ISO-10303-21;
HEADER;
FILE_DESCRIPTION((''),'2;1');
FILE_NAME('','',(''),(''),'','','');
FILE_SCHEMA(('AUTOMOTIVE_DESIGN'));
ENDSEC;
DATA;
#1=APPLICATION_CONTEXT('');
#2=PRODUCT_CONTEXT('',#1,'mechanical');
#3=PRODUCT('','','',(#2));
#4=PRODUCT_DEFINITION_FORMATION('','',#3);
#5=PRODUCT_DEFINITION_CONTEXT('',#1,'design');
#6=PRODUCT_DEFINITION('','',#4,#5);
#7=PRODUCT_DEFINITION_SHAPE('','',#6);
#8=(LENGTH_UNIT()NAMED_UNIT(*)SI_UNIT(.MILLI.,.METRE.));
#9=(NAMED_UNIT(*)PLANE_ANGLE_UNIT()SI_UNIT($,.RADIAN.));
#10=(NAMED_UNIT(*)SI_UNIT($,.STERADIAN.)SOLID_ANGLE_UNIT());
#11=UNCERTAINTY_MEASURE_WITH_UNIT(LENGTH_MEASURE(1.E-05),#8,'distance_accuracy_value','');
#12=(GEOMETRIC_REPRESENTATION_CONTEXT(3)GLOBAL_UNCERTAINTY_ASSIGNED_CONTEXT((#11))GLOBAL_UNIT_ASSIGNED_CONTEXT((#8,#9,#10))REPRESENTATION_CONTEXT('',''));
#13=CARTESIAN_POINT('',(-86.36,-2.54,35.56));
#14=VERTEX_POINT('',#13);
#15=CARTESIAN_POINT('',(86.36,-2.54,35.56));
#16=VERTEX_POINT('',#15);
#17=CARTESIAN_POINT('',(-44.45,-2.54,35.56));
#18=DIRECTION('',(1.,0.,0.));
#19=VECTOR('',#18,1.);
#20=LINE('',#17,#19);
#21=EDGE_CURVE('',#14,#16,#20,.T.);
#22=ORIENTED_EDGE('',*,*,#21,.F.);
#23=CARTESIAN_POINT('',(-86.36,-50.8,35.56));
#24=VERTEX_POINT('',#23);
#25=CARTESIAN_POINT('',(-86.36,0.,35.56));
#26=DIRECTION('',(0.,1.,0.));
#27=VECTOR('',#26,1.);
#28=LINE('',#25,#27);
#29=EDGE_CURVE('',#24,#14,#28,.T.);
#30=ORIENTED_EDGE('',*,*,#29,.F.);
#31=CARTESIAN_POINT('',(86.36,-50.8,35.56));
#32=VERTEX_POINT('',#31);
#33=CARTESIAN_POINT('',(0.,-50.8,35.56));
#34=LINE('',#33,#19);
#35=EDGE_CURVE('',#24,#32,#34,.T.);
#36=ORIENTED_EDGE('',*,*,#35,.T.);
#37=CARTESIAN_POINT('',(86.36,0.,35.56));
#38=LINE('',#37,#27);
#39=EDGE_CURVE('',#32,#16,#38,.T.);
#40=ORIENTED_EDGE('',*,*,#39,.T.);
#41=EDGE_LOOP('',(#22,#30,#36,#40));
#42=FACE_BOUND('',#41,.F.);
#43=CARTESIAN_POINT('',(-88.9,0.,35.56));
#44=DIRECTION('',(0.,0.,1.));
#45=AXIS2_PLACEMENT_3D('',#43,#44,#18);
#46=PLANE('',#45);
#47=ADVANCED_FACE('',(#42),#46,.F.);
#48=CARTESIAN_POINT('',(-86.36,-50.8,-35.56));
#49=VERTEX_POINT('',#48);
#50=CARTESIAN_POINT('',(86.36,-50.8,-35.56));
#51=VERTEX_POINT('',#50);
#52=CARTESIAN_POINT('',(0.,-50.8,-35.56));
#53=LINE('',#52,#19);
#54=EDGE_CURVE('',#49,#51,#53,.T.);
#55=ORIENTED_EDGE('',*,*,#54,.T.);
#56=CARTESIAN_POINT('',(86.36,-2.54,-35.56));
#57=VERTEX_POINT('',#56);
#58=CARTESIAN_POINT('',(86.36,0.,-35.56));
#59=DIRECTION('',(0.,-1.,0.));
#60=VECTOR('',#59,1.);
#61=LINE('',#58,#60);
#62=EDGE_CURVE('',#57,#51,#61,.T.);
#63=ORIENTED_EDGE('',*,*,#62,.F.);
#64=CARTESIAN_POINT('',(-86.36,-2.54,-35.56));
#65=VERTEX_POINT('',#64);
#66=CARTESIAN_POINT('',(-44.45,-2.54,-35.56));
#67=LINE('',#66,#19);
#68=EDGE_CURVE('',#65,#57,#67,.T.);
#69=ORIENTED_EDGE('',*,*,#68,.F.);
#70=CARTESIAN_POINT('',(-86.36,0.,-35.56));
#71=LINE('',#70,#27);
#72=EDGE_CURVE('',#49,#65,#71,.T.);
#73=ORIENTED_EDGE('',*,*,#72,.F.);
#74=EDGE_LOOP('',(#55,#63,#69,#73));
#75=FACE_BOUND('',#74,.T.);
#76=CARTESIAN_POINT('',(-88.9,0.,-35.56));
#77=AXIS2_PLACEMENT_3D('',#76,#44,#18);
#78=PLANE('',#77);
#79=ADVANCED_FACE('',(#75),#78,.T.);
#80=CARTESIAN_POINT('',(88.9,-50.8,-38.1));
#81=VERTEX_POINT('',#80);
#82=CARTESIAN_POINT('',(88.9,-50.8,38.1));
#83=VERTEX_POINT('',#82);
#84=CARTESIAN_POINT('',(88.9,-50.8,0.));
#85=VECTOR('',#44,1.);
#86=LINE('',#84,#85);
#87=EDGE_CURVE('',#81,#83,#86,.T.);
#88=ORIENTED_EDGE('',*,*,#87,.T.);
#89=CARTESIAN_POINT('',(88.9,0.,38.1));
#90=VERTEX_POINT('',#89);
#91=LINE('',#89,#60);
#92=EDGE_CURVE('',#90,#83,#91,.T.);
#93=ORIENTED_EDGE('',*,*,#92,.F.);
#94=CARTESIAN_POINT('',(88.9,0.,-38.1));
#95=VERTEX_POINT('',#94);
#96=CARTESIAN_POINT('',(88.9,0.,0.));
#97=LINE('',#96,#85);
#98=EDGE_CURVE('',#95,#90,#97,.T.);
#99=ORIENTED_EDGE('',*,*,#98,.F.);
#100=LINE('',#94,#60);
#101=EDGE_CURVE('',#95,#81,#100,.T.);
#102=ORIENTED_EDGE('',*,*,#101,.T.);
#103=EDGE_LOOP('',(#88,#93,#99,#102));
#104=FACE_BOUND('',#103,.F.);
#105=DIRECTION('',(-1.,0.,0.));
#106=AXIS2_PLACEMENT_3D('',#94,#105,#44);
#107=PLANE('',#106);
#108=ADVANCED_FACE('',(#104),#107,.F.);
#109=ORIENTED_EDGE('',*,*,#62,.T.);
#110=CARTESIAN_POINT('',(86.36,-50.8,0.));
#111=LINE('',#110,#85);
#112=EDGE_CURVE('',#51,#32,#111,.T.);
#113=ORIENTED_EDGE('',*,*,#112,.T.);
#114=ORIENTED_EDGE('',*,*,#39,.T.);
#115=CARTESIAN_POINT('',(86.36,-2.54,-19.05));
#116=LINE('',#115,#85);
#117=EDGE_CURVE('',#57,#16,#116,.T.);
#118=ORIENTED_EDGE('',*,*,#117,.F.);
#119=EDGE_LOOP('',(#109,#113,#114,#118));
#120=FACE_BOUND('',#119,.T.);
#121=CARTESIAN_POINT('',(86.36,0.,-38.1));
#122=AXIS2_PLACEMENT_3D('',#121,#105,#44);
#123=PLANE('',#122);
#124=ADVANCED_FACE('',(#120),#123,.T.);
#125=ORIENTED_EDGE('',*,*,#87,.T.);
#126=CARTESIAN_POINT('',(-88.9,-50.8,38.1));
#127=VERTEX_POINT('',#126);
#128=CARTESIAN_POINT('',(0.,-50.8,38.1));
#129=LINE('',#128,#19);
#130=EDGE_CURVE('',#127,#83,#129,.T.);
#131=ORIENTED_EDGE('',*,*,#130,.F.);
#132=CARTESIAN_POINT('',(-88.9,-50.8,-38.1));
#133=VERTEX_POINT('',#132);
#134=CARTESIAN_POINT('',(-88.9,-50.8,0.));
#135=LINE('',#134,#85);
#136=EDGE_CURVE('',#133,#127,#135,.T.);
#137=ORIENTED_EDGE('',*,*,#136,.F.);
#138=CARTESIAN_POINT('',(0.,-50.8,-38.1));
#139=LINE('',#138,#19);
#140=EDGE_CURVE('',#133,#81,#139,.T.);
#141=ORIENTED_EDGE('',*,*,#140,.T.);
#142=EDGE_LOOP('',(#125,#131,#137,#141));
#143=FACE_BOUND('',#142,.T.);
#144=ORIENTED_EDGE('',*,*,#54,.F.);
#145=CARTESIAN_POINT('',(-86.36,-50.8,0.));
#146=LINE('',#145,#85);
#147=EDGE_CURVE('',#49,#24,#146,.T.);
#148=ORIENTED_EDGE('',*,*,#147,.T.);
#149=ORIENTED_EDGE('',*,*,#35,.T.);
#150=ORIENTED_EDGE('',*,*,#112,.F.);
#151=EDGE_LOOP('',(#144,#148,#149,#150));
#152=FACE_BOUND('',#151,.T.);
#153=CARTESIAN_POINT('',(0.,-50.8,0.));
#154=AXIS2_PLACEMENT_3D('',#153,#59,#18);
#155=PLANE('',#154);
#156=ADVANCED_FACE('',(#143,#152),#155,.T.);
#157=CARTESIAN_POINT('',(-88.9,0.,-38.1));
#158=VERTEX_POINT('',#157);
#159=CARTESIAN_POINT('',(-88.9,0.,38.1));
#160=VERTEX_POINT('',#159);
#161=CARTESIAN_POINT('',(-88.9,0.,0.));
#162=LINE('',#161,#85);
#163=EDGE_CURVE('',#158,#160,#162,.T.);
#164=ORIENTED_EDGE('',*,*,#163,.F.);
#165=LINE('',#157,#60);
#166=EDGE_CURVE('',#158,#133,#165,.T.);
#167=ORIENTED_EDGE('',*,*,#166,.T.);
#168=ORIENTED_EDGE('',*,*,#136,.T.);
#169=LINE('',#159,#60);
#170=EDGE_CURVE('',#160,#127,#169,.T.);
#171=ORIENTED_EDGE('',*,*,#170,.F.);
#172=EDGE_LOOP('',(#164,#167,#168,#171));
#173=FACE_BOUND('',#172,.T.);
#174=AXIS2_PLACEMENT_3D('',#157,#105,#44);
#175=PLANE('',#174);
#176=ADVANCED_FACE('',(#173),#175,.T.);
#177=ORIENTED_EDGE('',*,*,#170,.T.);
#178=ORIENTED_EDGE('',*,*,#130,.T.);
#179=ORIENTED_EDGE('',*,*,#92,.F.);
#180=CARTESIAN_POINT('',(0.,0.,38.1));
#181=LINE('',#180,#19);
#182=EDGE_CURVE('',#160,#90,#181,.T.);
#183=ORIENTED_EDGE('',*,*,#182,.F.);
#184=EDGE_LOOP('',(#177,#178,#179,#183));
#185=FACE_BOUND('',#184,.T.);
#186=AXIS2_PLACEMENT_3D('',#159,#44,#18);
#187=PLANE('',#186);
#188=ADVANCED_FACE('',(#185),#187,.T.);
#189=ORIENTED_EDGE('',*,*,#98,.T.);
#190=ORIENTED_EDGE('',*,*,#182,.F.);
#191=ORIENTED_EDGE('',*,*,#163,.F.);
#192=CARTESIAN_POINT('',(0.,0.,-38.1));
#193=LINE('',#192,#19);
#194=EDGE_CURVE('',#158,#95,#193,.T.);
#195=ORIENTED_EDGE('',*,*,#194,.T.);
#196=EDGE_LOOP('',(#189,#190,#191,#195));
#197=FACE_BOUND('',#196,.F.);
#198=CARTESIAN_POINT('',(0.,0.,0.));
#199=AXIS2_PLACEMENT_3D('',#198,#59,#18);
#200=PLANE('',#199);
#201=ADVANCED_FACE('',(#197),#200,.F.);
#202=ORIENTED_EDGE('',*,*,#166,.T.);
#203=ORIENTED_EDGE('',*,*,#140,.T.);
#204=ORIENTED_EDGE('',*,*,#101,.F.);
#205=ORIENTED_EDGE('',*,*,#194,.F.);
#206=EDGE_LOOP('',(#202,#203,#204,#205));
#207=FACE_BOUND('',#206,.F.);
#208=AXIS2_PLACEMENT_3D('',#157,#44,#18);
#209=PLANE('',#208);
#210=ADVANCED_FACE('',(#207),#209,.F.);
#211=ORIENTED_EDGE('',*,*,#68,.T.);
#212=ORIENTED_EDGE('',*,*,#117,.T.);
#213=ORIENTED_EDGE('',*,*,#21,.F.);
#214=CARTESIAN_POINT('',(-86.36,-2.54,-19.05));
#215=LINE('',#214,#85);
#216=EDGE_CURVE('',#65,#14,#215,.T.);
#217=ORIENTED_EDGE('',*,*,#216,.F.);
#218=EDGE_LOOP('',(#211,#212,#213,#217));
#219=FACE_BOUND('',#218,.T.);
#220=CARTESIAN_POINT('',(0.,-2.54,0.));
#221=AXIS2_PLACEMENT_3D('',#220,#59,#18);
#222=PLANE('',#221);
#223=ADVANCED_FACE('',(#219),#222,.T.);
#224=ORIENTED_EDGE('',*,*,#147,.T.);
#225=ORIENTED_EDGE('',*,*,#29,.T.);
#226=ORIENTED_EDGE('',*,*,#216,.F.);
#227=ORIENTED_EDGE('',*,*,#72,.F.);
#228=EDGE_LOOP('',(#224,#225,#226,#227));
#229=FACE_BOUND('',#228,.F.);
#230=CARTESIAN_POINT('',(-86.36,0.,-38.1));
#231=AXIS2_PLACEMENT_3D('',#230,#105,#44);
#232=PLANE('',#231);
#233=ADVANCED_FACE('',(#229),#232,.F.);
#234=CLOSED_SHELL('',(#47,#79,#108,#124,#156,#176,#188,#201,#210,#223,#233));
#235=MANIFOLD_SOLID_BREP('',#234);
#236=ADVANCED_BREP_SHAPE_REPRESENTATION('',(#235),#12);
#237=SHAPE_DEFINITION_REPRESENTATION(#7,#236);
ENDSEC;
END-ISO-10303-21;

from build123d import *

# Parameters (mm, degrees)
F0_W     = 177.8
F0_H     = 76.2
F1_DEPTH = 50.8
F3_T     = -2.54


# Not quite as in the source:
# - the program builds the solid bodies; features that only make, move or delete a surface that nothing else refers to are left out


with BuildPart() as f1:
    # F0 (on Front) → F1 (new body)
    with BuildSketch(Plane.XZ):
        Rectangle(F0_W, F0_H)
    extrude(amount=F1_DEPTH)

    # F3
    f3_openings = [f1.faces().sort_by_distance(p)[0] for p in [
        (0, -50.8, 0),
    ]]
    offset(amount=F3_T, openings=f3_openings)


solid = f1.part
